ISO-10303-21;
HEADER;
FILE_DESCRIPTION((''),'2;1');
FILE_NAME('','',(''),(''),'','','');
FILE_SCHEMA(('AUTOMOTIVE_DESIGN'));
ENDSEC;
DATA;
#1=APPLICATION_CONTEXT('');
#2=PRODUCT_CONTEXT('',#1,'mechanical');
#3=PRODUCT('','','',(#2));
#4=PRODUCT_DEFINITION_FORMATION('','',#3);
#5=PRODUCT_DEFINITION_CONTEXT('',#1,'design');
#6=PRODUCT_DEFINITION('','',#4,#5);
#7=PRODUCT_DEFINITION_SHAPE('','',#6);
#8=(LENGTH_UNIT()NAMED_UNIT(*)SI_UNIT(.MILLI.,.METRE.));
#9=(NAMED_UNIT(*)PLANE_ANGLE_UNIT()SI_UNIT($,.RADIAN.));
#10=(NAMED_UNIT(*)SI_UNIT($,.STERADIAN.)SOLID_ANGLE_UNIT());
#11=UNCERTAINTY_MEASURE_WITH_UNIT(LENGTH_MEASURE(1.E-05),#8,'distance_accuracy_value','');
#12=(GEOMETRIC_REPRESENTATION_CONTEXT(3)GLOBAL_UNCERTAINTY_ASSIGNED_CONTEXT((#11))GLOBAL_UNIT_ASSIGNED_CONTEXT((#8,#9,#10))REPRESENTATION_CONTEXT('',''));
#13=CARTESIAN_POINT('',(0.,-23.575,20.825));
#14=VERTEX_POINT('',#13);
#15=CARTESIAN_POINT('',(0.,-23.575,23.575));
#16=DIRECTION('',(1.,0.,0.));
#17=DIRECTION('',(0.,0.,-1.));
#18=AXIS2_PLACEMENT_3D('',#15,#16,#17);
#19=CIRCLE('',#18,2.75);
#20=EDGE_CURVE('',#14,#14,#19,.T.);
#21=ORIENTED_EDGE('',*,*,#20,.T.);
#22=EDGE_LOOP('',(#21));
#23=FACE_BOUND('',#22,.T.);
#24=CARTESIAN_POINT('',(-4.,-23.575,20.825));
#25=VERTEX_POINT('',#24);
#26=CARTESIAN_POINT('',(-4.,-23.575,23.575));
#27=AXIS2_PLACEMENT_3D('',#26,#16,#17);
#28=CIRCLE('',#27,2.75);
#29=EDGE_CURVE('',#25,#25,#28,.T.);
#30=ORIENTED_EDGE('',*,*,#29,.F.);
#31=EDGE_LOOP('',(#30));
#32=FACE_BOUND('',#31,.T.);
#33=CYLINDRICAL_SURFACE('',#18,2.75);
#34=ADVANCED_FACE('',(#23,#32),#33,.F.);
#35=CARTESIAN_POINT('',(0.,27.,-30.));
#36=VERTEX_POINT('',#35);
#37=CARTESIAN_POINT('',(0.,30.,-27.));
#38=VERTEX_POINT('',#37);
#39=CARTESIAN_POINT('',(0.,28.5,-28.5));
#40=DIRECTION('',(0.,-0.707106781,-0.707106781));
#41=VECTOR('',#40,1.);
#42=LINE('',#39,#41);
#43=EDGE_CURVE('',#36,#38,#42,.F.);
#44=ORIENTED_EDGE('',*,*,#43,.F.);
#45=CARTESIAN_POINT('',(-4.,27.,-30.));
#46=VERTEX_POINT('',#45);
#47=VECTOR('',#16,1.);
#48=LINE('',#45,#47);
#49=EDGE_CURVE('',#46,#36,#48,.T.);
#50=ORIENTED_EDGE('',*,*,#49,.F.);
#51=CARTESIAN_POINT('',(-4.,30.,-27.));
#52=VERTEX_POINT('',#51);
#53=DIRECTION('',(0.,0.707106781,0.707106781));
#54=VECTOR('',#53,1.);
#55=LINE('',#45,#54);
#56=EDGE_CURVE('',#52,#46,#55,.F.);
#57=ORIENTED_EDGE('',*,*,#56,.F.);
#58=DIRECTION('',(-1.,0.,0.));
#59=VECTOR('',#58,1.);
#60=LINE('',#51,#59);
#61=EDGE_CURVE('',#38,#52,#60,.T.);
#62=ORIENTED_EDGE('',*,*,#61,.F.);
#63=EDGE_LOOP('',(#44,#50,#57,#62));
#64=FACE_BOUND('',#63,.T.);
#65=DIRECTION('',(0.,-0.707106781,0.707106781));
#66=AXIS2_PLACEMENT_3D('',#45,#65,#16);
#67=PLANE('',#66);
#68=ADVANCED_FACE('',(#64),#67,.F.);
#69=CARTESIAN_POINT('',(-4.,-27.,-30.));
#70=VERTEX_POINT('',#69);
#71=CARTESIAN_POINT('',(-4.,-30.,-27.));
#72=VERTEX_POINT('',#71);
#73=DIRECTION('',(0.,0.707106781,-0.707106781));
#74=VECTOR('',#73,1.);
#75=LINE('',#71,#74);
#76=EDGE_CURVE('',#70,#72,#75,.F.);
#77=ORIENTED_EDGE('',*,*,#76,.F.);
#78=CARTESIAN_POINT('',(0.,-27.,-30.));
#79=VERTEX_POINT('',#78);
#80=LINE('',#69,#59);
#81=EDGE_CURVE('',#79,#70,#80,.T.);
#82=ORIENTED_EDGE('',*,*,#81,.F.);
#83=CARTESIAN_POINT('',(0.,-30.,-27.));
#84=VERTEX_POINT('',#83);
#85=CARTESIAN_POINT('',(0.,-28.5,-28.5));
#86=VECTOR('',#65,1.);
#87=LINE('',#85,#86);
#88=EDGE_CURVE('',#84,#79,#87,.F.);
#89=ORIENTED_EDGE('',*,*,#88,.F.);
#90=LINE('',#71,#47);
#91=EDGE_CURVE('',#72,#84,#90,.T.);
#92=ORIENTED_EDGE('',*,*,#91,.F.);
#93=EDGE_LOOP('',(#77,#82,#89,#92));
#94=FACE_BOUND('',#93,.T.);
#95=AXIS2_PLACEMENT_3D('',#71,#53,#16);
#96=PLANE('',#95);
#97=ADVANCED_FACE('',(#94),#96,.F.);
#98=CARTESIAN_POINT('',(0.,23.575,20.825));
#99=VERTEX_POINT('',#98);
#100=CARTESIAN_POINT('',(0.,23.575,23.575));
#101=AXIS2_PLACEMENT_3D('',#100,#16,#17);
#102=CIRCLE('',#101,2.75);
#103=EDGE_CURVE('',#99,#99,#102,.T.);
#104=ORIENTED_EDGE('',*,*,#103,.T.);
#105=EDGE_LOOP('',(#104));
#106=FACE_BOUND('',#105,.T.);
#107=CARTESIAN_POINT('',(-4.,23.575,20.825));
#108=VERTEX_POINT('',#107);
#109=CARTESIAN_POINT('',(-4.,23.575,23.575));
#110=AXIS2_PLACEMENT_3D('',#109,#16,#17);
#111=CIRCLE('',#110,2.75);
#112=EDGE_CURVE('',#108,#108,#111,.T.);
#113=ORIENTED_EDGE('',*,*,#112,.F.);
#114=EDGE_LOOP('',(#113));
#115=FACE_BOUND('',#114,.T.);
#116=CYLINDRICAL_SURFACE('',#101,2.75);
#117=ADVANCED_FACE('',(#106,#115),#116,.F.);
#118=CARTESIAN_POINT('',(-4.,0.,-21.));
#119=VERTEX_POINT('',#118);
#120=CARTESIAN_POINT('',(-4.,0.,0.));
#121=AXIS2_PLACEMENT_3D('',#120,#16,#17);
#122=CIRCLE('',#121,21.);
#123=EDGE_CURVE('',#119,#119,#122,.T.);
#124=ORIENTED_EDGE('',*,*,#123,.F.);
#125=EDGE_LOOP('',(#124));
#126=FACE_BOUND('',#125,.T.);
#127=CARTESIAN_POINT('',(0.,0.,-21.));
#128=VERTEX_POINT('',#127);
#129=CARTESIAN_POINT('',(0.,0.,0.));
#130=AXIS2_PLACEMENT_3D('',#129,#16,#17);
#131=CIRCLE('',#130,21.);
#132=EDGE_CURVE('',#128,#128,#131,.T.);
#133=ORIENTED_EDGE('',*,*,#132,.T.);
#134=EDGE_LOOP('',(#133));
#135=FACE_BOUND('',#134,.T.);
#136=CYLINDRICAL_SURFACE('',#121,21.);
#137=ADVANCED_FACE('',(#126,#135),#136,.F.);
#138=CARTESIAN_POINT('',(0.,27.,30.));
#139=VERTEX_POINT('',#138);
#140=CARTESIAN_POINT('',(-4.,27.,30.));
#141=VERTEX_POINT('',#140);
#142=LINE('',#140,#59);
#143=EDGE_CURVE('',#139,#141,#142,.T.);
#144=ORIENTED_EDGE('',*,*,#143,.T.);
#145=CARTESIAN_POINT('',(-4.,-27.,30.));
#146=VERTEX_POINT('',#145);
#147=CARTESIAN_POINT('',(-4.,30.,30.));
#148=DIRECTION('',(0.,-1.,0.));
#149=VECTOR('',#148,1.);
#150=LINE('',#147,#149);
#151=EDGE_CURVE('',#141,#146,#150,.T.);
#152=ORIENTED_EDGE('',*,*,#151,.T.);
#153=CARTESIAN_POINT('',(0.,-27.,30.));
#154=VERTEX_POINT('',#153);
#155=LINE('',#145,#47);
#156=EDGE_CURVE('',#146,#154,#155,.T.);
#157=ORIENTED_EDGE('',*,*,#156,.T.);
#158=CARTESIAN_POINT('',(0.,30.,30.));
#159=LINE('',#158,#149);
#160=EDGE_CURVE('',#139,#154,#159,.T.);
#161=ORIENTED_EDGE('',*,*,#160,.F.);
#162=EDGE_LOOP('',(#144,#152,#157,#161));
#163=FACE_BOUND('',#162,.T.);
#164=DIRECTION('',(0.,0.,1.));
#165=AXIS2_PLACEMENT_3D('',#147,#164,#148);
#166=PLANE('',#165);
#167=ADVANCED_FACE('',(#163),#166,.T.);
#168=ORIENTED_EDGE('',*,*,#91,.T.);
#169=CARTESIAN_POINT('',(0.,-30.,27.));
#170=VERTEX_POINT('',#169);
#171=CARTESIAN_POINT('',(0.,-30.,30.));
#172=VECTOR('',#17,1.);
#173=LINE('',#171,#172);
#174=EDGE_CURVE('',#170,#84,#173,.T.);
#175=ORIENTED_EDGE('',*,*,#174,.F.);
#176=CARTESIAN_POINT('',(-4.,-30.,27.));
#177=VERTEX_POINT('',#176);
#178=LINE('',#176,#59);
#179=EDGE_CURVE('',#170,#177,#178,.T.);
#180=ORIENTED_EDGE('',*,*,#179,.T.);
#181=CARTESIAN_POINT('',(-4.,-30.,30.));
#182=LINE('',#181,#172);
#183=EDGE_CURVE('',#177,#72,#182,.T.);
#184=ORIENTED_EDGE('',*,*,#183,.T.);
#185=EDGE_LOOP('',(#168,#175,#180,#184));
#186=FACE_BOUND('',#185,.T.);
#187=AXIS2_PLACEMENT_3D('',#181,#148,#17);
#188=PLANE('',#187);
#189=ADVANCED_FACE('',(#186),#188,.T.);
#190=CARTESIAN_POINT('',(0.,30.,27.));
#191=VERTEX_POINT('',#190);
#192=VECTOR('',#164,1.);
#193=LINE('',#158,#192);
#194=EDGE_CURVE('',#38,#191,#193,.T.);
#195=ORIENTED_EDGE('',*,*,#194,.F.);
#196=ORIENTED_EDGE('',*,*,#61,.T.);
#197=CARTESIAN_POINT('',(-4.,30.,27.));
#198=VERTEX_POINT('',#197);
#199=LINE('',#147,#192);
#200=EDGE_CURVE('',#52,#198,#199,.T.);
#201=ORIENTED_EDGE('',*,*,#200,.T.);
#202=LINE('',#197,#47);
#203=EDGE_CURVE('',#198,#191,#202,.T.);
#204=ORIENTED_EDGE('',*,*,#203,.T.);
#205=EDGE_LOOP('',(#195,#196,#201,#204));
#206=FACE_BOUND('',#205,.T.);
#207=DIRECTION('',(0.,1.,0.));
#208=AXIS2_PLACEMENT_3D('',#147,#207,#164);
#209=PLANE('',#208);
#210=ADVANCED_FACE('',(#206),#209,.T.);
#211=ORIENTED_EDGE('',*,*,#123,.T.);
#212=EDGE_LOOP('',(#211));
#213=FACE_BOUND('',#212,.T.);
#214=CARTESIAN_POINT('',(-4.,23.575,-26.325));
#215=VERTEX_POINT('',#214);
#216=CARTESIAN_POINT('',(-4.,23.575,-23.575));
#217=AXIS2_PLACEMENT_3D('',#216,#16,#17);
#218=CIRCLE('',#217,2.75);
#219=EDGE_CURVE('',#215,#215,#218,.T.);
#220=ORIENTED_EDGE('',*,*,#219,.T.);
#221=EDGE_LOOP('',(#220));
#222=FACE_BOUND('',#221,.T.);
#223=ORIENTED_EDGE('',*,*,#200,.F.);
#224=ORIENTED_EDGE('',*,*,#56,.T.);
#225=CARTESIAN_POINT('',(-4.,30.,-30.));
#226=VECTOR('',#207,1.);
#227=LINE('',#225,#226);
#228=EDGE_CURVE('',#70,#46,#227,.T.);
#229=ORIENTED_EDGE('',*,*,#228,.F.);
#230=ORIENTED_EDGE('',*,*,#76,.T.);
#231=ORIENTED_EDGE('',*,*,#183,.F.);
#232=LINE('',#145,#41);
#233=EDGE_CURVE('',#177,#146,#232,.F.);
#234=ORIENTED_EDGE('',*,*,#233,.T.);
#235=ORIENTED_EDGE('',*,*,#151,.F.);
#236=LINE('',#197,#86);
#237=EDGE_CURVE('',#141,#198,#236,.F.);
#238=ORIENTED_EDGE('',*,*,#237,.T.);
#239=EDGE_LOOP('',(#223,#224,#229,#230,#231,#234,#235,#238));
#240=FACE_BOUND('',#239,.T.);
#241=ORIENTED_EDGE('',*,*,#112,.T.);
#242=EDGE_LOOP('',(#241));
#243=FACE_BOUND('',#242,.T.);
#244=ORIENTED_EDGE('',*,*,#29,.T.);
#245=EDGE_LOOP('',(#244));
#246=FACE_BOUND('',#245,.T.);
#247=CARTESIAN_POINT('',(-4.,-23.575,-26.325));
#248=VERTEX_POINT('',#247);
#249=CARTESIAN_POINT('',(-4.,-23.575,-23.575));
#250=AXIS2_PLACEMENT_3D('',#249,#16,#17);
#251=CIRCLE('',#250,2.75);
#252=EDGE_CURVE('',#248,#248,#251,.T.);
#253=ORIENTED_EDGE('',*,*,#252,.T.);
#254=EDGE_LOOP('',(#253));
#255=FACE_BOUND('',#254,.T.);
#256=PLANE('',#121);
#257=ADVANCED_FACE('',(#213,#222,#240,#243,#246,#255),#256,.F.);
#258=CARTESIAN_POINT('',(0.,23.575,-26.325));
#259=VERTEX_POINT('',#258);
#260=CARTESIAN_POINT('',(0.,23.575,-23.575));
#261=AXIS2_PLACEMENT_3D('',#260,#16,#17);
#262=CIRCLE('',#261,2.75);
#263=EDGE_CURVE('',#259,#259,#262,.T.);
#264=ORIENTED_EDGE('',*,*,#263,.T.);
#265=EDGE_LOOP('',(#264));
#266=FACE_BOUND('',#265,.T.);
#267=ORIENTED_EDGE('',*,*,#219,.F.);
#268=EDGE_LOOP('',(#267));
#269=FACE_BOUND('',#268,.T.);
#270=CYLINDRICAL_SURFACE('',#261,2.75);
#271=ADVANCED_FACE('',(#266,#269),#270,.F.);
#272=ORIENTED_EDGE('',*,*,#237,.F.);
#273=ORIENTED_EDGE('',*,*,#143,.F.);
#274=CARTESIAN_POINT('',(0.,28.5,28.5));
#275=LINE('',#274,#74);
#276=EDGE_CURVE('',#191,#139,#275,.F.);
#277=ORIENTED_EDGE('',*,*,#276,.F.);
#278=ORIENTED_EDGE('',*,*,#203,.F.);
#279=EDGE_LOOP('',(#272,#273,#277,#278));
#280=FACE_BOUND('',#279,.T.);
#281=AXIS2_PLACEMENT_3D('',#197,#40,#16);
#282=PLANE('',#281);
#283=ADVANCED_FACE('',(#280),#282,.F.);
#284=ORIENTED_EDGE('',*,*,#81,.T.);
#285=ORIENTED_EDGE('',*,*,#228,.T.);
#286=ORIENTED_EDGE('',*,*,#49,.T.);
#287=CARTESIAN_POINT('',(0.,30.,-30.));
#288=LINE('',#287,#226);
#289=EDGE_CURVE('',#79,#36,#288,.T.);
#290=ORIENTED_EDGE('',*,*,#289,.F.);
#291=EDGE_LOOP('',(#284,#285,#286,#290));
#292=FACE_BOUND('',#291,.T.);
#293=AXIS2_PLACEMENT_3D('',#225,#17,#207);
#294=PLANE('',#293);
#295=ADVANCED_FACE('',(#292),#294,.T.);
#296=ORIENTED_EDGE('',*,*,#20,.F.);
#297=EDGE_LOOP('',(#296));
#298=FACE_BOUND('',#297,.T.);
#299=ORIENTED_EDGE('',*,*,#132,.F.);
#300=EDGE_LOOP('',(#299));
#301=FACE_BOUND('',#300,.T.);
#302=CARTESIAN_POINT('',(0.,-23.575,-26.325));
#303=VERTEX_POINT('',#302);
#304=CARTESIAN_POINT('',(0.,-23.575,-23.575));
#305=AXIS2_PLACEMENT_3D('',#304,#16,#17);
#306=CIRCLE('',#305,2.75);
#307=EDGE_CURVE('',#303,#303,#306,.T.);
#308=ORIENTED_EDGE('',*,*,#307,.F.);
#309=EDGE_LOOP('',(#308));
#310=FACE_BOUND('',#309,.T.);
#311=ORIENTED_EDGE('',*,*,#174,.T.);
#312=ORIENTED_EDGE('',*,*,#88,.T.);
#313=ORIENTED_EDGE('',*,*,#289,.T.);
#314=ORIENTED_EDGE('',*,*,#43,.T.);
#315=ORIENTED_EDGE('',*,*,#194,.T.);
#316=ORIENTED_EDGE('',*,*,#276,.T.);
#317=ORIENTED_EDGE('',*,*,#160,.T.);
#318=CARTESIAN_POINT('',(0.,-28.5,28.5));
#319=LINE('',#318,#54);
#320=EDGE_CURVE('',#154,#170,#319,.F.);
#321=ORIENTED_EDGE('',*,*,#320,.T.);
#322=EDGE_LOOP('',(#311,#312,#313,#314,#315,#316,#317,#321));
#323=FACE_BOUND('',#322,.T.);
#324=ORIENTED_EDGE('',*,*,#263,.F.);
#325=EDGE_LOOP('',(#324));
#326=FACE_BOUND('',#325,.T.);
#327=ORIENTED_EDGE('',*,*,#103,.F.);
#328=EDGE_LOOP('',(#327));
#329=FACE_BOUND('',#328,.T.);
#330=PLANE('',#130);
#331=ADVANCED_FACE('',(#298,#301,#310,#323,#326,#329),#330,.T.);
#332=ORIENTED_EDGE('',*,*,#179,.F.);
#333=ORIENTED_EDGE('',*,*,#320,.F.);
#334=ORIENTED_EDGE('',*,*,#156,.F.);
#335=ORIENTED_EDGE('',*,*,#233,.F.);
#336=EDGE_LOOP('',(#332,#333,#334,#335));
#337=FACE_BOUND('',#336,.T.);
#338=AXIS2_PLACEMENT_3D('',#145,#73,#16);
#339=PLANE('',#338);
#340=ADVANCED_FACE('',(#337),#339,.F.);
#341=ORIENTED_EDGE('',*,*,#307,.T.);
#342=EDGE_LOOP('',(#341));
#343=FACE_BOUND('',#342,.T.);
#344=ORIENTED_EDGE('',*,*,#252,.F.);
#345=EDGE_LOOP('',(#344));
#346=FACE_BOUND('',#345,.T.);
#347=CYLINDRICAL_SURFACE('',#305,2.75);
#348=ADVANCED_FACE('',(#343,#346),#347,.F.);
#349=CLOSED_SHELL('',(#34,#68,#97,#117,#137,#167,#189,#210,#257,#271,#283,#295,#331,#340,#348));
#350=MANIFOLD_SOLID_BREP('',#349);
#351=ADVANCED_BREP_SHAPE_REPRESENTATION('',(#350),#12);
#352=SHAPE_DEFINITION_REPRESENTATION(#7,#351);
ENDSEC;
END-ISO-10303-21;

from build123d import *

# Parameters (mm, degrees)
SZKIC1_W                = 60
SZKIC1_H                = 60
SZKIC1_R                = 21
ODGI_CIE_BAZOWE1_DEPTH  = 4
OTW_R_POD_RUB_M51_D     = 5.5
OTW_R_POD_RUB_M51_DEPTH = 11
OTW_R_POD_RUB_M51_TIP   = 1.652366702
SFAZOWANIE1_SIZE        = 3


# Sheet-metal steps are written as plain solids
with BuildPart() as part:
    # Szkic1 → Odgięcie bazowe1 (new body)
    with BuildSketch(Plane(origin=(0, 0, 0), x_dir=(0, 0, -1), z_dir=(1, 0, 0))):
        Rectangle(SZKIC1_W, SZKIC1_H)
        Circle(SZKIC1_R, mode=Mode.SUBTRACT)
    extrude(amount=-ODGI_CIE_BAZOWE1_DEPTH)

    # Otwór pod śrubę M51
    with Locations(Plane(origin=(0, 0, 0), x_dir=(0, 0, -1), z_dir=(1, 0, 0))):
        with Locations((-23.575, 23.575), (23.575, 23.575), (23.575, -23.575), (-23.575, -23.575)):
            Hole(OTW_R_POD_RUB_M51_D / 2, depth=OTW_R_POD_RUB_M51_DEPTH)
            with Locations((0, 0, -(OTW_R_POD_RUB_M51_DEPTH + OTW_R_POD_RUB_M51_TIP / 2))):  # 118° drill point
                Cone(0, OTW_R_POD_RUB_M51_D / 2, OTW_R_POD_RUB_M51_TIP, mode=Mode.SUBTRACT)

    # Sfazowanie1
    sfazowanie1_edges = [part.edges().sort_by_distance(p)[0] for p in [
        (-2, -30, -30),
        (-2, -30, 30),
        (-2, 30, 30),
        (-2, 30, -30),
    ]]
    chamfer(sfazowanie1_edges, length=SFAZOWANIE1_SIZE)


solid = part.part
